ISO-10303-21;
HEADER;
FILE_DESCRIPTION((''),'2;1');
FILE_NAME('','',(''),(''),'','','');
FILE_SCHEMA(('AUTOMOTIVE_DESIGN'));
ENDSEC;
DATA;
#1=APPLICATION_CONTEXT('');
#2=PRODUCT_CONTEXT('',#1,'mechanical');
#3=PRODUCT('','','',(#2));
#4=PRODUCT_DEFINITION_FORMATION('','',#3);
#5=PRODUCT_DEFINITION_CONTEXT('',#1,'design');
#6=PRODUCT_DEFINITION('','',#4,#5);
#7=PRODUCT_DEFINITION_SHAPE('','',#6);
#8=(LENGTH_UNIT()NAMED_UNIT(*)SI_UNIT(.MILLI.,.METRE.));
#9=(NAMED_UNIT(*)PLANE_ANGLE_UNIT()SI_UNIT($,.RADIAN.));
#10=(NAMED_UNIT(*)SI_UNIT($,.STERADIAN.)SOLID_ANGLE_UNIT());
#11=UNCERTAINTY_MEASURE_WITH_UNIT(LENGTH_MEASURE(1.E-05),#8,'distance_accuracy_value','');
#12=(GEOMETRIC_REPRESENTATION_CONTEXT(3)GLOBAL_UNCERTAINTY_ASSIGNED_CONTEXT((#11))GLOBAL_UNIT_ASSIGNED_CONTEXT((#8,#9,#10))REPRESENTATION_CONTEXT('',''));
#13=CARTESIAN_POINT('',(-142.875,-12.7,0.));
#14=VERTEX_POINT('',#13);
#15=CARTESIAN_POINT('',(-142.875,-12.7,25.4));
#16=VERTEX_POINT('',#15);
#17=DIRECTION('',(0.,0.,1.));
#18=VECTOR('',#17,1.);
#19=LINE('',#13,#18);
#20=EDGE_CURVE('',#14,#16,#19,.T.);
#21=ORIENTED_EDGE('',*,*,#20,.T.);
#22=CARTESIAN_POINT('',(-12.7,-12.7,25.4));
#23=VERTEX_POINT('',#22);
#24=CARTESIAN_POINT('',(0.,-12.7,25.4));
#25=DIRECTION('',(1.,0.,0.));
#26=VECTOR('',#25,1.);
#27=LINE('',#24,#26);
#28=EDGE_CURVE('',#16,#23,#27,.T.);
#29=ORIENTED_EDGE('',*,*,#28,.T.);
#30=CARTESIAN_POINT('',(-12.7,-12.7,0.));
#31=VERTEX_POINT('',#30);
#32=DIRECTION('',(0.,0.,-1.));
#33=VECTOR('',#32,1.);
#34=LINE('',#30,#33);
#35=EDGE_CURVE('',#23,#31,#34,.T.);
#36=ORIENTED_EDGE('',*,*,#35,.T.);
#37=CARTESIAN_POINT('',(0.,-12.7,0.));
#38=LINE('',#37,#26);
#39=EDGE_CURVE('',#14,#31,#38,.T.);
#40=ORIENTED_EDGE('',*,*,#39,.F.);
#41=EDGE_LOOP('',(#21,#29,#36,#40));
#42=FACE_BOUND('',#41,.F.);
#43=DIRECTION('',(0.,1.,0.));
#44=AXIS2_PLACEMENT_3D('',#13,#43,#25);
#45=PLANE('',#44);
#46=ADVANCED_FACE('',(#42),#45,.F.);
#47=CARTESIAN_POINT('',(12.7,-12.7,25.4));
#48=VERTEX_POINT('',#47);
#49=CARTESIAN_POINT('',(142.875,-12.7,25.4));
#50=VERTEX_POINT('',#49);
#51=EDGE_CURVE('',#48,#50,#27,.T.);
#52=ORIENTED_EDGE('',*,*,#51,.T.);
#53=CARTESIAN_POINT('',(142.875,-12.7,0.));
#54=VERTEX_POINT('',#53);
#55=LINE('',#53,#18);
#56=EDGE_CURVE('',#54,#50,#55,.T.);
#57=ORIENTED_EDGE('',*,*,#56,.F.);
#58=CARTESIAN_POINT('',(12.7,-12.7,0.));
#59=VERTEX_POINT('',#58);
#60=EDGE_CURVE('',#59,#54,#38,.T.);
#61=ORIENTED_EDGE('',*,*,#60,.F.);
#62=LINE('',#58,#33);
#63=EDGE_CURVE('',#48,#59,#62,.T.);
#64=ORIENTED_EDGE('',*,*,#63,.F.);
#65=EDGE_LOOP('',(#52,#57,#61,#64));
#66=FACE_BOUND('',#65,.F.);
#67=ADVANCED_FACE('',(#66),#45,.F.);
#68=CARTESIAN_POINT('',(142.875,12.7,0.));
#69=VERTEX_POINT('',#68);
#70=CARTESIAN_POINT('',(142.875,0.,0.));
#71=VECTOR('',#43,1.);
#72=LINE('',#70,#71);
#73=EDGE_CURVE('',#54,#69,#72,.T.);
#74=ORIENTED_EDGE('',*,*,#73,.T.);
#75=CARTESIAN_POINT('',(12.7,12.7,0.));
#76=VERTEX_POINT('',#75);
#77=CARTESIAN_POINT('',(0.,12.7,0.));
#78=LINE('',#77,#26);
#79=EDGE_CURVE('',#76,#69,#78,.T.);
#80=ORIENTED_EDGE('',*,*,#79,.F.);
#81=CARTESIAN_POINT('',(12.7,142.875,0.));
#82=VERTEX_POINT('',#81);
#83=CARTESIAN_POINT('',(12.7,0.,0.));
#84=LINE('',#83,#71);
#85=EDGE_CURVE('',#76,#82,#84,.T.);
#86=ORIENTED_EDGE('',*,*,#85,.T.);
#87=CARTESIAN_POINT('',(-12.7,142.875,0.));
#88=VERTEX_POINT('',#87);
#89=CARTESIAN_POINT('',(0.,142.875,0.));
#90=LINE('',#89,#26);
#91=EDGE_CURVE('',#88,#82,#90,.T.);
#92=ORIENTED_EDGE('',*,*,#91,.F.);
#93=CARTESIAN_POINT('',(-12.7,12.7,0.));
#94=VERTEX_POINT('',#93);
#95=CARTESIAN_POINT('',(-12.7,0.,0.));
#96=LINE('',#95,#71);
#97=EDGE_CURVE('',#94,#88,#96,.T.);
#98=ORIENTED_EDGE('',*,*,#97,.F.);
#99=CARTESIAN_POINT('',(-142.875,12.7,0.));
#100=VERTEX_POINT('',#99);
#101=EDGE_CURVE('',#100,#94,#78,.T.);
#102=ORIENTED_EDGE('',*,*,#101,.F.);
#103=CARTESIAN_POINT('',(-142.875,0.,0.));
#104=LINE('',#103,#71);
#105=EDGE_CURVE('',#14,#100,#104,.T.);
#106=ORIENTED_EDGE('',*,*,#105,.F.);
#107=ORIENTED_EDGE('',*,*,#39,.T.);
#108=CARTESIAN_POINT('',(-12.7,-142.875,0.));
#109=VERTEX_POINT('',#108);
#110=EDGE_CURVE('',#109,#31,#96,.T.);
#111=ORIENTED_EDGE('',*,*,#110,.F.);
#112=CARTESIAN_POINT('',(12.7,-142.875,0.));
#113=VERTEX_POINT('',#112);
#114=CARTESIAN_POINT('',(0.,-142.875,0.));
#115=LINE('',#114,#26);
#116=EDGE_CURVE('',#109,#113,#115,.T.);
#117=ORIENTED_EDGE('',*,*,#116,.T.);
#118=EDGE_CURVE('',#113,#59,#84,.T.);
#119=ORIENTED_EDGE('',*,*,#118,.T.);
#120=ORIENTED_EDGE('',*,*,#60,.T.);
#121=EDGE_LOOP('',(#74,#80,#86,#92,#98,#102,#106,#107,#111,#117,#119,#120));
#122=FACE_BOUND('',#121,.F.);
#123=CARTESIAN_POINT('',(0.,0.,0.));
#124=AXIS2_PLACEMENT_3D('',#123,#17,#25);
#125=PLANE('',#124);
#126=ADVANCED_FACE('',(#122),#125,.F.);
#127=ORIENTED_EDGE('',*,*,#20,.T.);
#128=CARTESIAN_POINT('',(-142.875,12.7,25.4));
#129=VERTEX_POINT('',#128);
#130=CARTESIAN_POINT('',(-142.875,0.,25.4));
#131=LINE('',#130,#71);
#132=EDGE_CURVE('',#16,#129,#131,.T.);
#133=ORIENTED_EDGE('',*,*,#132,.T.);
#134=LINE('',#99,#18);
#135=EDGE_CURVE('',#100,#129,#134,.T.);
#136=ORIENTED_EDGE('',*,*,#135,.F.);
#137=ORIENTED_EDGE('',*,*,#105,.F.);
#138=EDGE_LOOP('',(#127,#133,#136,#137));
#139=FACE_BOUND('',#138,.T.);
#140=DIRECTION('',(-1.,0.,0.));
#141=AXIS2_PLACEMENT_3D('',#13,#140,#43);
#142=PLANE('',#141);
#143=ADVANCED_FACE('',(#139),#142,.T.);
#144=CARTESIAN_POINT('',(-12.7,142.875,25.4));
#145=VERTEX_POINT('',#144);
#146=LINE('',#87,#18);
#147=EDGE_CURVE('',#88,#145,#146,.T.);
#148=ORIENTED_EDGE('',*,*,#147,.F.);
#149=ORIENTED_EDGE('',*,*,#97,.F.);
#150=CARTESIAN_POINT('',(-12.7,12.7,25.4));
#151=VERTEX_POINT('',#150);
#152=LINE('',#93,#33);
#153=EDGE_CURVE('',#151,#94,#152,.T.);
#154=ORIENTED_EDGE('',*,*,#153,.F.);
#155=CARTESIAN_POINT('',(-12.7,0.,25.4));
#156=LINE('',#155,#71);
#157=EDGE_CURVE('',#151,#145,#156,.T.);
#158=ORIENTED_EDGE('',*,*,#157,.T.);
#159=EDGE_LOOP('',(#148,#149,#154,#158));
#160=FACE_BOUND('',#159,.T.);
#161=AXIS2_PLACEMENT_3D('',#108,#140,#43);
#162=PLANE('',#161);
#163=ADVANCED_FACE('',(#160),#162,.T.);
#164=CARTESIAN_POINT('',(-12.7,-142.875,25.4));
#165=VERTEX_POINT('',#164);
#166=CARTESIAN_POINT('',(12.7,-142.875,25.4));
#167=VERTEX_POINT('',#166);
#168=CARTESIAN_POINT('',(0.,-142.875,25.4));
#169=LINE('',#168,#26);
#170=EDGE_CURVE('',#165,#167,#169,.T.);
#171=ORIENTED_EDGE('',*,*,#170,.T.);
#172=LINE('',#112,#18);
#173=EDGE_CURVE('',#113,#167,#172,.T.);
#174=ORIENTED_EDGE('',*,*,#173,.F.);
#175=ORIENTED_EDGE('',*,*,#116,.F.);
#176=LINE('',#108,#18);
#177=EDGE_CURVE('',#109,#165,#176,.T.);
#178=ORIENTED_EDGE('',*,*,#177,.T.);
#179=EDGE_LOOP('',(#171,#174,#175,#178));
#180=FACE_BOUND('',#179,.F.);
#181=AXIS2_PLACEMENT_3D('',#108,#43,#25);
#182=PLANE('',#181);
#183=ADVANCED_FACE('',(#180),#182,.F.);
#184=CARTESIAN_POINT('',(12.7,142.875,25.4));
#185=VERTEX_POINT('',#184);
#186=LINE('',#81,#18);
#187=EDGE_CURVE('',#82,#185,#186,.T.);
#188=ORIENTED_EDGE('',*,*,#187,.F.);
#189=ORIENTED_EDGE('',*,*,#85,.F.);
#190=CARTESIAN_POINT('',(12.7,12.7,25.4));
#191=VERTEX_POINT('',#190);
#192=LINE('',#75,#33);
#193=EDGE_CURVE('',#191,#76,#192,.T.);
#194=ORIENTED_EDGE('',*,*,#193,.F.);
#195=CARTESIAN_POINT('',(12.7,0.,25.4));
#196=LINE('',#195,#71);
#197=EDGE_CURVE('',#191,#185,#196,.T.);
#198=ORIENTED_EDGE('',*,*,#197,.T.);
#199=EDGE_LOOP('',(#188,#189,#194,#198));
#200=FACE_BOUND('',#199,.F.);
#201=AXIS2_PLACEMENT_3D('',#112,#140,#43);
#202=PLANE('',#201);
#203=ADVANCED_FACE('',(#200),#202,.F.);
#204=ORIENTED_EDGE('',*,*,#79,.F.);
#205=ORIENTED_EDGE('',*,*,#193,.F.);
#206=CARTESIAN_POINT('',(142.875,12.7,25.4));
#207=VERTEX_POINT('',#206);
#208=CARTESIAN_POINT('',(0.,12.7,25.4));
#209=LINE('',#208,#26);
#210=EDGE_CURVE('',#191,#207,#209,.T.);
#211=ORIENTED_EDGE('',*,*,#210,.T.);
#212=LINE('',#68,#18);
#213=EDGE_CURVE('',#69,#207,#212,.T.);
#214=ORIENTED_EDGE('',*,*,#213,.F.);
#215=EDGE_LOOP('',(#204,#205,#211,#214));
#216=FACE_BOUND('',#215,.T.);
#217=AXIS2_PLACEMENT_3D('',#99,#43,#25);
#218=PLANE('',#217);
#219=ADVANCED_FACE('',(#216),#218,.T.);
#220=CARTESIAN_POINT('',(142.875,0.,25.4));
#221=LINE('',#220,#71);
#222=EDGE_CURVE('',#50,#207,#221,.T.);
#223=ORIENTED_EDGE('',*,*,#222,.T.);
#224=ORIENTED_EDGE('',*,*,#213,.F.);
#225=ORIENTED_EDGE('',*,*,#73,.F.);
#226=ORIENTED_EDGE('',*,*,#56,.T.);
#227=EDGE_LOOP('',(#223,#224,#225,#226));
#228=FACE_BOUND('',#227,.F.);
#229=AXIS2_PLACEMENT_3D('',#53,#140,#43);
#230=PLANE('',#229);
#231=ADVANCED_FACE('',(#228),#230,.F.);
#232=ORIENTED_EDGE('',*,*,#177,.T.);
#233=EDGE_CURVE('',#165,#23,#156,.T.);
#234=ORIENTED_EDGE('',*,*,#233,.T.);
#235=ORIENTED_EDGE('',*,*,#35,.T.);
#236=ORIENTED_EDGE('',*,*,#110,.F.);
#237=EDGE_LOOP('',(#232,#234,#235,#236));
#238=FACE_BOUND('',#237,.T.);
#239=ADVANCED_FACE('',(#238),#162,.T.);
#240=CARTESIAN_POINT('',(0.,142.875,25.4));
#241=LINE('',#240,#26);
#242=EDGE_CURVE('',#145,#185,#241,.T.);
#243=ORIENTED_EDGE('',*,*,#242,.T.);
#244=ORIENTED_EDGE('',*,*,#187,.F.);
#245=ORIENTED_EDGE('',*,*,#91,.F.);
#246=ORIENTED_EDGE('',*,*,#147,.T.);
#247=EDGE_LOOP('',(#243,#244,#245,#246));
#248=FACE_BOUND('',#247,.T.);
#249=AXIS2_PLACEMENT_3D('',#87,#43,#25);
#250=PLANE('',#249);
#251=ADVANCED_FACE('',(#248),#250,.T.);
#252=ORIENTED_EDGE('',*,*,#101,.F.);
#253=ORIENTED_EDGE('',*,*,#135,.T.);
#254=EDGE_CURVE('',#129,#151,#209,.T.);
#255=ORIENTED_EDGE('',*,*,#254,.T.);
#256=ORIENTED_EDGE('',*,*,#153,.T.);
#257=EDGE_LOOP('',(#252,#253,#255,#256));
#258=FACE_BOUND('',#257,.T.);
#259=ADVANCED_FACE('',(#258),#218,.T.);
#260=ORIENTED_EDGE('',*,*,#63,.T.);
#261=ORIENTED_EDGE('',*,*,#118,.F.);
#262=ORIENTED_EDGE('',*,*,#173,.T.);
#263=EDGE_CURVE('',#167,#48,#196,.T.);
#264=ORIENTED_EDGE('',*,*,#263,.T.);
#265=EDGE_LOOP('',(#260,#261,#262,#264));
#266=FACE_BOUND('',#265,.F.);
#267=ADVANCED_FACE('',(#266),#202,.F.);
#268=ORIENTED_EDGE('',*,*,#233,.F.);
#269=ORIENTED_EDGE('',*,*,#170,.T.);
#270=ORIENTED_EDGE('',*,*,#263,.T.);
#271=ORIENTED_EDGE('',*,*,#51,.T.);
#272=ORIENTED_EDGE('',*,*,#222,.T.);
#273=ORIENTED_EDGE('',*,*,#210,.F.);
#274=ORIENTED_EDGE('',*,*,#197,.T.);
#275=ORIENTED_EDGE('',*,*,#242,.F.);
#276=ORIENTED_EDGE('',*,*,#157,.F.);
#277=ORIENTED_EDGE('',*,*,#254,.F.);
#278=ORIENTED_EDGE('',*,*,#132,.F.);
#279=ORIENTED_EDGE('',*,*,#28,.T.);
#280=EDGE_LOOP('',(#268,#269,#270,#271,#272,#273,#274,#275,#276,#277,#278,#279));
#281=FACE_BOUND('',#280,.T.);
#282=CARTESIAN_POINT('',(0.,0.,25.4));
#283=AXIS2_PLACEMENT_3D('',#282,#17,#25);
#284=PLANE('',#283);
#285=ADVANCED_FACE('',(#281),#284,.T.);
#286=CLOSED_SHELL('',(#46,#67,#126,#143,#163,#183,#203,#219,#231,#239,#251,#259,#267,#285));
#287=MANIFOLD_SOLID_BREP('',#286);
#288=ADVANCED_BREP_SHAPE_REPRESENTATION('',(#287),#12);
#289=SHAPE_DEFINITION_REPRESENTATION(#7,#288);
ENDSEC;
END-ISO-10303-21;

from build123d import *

# Parameters (mm, degrees)
F1_W     = 25.4
F1_H     = 285.75
F2_DEPTH = 25.4
F0_W     = 285.75
F0_H     = 25.4
F3_DEPTH = 25.4


# Not quite as in the source:
# - the program builds the solid bodies; features that only make, move or delete a surface that nothing else refers to are left out


with BuildPart() as f2:
    # F1 (on Top) → F2 (new body)
    with BuildSketch(Plane.XY):
        Rectangle(F1_W, F1_H)
    extrude(amount=F2_DEPTH)

    # F0 (on Top) → F3 (join)
    with BuildSketch(Plane.XY):
        Rectangle(F0_W, F0_H)
    extrude(amount=F3_DEPTH)


solid = f2.part
